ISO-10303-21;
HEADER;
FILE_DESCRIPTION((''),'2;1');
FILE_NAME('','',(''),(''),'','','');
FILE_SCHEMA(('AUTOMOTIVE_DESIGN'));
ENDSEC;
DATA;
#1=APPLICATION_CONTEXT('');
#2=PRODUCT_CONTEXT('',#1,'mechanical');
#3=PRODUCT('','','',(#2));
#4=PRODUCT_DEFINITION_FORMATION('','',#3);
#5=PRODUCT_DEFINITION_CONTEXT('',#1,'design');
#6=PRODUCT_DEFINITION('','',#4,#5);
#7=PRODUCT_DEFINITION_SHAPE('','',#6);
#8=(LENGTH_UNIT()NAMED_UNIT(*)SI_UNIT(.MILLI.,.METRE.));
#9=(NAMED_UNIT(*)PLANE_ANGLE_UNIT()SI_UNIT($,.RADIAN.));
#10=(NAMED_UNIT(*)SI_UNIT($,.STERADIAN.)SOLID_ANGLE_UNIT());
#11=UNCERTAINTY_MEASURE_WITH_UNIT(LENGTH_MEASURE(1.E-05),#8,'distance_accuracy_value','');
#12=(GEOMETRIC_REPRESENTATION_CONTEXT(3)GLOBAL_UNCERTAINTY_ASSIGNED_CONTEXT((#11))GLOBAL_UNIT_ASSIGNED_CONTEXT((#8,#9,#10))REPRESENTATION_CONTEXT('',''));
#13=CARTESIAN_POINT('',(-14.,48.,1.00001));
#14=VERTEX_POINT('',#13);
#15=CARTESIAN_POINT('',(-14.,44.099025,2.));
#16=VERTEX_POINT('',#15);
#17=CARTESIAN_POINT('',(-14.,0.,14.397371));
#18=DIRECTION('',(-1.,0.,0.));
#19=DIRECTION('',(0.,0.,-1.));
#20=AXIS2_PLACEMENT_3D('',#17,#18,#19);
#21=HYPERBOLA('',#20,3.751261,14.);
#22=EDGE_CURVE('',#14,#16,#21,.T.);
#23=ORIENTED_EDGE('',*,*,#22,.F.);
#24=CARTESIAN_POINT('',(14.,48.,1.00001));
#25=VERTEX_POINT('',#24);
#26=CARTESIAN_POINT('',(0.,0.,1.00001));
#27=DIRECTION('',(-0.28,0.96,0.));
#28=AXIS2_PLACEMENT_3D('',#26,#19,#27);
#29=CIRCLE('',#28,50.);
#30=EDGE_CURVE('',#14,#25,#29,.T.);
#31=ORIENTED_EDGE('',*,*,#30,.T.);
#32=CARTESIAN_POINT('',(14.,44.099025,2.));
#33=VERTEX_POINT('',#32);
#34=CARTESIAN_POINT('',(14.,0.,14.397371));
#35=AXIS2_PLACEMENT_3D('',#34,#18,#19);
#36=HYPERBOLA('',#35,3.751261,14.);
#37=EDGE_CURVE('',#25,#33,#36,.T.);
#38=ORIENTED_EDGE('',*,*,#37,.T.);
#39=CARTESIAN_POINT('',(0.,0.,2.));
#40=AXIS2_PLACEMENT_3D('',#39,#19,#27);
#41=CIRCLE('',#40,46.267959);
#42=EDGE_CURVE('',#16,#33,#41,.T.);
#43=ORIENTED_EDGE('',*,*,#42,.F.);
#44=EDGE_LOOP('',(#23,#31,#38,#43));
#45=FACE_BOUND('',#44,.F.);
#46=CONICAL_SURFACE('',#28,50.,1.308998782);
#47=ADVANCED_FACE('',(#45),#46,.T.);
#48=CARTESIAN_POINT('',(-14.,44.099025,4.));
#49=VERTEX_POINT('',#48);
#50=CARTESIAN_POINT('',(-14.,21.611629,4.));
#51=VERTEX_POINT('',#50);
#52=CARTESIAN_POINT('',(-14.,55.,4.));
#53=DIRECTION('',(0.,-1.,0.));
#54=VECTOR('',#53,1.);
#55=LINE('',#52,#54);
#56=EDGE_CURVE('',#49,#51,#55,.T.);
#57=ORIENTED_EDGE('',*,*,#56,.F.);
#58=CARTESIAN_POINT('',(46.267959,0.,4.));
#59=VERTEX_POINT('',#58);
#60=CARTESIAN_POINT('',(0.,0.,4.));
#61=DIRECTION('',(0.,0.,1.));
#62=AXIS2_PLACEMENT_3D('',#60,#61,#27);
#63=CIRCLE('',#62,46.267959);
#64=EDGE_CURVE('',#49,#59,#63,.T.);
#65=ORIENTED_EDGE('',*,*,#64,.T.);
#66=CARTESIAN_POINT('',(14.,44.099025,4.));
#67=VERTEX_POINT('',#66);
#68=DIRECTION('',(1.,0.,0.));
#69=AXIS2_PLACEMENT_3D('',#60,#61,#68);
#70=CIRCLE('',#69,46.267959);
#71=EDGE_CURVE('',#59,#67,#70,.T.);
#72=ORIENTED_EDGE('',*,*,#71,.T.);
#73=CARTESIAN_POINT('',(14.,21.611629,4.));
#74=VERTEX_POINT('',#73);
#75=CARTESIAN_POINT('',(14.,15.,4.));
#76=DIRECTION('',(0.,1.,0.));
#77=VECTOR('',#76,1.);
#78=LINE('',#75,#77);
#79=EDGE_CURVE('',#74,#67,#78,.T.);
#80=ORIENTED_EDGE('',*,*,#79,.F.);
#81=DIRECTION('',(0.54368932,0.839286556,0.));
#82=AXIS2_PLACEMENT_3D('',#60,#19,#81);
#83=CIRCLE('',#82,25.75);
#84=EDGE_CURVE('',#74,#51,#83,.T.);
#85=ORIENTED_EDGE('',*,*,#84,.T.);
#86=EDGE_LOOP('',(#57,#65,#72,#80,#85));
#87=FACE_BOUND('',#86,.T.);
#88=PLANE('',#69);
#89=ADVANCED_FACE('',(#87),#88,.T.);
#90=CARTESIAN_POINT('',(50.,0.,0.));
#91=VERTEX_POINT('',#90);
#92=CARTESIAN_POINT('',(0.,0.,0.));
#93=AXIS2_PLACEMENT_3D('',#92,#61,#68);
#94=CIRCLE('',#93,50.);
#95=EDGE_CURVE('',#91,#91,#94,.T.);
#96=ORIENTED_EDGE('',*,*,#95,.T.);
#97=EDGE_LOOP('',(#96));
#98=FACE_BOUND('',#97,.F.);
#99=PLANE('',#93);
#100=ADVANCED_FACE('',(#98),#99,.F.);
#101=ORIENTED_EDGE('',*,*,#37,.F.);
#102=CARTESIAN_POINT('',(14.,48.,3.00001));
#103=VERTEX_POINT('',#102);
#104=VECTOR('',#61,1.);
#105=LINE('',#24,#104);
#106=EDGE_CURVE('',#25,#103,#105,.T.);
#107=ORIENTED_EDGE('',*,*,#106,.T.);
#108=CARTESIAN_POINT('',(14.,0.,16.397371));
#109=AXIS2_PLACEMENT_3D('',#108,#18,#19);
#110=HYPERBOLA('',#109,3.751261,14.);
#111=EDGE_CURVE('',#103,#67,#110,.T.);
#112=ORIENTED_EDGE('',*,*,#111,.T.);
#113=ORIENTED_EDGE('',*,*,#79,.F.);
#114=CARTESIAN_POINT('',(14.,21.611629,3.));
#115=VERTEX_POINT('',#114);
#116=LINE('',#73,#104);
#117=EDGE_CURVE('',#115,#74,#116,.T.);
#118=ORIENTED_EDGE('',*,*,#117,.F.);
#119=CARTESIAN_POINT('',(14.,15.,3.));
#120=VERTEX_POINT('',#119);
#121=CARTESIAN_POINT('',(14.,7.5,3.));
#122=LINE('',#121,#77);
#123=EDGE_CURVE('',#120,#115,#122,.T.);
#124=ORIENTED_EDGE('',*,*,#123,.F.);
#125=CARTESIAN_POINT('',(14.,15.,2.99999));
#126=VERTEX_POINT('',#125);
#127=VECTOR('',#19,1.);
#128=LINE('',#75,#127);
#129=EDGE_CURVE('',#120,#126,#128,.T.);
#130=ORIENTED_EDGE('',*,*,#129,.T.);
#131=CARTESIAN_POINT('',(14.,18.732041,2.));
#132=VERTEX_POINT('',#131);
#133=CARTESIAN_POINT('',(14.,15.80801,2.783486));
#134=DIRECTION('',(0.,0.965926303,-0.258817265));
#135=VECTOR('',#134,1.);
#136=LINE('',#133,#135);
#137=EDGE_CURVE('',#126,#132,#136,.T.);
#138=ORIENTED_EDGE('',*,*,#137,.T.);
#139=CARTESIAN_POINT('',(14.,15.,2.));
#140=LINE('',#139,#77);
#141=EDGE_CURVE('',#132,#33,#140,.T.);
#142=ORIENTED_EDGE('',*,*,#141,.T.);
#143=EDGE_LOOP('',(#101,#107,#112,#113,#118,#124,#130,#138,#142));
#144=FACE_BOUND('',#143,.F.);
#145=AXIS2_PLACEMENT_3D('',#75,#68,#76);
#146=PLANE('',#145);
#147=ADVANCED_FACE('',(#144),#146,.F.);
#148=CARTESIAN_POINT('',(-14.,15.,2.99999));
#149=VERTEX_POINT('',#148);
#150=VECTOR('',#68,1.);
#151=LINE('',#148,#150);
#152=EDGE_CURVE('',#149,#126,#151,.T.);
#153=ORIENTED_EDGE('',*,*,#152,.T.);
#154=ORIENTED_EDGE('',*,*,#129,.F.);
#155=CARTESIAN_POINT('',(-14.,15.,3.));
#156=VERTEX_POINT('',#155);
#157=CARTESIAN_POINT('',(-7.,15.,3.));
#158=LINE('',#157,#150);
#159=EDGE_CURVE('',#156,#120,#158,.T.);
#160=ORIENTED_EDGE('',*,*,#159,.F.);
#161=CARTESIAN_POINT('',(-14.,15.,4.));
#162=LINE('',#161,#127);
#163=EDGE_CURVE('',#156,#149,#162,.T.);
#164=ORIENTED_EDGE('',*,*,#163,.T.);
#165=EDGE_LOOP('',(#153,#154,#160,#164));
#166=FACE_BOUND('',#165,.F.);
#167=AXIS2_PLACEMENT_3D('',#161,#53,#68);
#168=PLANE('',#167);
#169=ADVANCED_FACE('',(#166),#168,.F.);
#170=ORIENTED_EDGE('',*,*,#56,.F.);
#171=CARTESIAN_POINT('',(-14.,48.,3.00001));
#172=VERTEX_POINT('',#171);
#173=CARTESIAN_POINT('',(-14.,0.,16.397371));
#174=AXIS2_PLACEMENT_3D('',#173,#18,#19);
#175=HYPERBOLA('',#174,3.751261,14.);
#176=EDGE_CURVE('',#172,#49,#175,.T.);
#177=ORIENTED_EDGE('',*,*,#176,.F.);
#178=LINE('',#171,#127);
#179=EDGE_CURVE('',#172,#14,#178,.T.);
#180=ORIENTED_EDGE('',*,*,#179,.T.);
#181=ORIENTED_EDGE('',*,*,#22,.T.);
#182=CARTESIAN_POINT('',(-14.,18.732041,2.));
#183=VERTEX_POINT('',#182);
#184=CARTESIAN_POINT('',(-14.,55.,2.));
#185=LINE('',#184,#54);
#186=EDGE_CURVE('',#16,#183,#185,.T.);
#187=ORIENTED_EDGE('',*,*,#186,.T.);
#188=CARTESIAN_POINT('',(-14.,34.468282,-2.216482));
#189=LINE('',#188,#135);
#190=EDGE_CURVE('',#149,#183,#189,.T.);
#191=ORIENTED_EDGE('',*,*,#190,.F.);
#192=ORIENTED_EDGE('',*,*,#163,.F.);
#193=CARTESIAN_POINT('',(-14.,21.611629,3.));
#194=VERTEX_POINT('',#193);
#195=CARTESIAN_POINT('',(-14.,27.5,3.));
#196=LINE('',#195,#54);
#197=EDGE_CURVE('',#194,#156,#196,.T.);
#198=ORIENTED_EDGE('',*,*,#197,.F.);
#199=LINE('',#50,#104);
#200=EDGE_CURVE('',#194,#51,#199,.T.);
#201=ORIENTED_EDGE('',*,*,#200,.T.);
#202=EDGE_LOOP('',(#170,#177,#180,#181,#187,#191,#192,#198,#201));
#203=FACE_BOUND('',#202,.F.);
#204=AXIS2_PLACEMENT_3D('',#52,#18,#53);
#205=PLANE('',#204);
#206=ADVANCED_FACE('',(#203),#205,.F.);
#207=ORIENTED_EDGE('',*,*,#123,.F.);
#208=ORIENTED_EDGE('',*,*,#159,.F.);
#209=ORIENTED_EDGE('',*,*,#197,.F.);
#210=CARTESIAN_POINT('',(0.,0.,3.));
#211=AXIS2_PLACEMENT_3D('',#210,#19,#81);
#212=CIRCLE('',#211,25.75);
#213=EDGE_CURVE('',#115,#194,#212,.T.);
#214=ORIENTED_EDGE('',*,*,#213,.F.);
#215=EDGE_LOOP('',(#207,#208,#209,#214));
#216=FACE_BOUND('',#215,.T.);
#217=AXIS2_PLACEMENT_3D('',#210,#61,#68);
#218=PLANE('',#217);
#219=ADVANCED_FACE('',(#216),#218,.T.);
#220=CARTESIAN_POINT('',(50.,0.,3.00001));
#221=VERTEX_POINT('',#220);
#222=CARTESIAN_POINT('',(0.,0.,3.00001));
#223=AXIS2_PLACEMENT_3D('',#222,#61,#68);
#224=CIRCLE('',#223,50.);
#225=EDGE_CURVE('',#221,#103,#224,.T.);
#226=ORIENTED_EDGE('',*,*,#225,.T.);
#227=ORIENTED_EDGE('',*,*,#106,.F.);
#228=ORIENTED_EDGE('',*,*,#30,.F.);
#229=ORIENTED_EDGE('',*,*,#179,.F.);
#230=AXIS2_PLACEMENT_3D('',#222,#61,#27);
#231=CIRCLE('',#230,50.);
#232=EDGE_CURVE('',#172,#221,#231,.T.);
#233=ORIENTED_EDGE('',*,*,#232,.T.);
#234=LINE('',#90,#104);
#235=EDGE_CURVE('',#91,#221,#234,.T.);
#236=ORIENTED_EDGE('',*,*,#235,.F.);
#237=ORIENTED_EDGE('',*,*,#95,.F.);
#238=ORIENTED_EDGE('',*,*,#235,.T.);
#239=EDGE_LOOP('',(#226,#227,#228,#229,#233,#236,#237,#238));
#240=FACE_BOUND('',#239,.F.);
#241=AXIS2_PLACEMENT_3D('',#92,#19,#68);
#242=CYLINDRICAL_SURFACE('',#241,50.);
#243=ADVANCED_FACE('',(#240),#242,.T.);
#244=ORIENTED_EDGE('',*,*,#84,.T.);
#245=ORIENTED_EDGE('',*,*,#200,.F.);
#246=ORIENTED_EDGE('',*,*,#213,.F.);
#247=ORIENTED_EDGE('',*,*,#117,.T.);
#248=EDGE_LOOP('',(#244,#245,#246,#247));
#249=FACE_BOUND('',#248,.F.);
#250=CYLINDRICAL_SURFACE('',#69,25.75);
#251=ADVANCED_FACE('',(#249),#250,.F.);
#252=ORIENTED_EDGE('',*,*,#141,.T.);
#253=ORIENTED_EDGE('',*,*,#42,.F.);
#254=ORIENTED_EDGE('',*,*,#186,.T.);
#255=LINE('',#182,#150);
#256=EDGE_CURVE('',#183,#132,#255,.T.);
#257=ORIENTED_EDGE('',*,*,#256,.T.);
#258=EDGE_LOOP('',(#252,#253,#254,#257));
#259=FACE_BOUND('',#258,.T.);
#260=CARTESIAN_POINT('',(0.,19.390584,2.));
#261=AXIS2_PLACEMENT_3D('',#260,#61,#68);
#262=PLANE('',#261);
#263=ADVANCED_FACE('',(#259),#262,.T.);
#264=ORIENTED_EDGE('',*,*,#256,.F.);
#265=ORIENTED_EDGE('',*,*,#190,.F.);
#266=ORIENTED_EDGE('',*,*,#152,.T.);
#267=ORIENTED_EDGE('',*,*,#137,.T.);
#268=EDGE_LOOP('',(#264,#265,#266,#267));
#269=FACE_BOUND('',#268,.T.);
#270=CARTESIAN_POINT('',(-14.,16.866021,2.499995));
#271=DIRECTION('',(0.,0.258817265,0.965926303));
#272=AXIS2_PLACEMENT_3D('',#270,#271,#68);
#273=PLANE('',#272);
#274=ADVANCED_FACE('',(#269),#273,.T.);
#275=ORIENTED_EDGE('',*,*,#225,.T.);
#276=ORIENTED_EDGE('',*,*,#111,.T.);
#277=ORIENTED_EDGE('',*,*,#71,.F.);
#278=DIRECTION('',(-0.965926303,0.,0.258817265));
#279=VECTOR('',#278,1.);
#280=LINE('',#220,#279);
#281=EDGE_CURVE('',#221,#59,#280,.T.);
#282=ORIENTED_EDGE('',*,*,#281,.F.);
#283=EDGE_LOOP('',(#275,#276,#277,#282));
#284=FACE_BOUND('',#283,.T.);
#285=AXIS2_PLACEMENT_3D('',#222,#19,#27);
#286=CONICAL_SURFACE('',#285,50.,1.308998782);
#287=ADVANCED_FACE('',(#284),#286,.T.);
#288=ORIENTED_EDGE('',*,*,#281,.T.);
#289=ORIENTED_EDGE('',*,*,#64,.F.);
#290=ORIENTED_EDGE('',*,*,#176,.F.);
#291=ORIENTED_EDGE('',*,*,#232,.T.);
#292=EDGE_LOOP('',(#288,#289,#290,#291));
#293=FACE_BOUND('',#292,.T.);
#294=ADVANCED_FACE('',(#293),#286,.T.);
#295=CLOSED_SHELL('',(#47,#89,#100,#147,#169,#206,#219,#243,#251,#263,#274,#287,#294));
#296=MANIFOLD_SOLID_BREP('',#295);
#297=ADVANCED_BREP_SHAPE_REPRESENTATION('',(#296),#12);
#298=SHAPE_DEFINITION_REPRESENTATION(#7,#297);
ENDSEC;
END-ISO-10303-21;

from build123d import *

# Parameters (mm, degrees)
F0_R     = 50
F1_DEPTH = 4
F2_R     = 25.75
F3_DEPTH = 1
F5_DEPTH = 2
F6_SIZE2 = 3.732041
F6_SIZE  = 0.99999


# Not quite as in the source:
# - a fillet or chamfer is up to 0.001 mm smaller than in the source, because OpenCascade refuses the exact size
# - a feature names something its author has since deleted; it is built from what else it names


with BuildPart() as f1:
    # F0 (on Top) → F1 (new body)
    with BuildSketch(Plane.XY):
        Circle(F0_R)
    extrude(amount=F1_DEPTH)

    # F2 (on face) → F3 (cut)
    with BuildSketch(Plane.XY.offset(4)):
        Circle(F2_R)
    extrude(amount=-F3_DEPTH, mode=Mode.SUBTRACT)

    # F4 (on face) → F5 (cut)
    with BuildSketch(Plane.XY.offset(4)):
        with BuildLine():
            Line((-14, 21.6116288141), (-14, 15))
            Line((-14, 15), (14, 15))
            Line((14, 15), (14, 21.6116288141))
            ThreePointArc((14, 21.6116288141), (0, 25.75), (-14, 21.6116288141))
        make_face()
        with BuildLine():
            Line((-14, 48), (-14, 21.6116288141))
            ThreePointArc((-14, 21.6116288141), (0, 25.75), (14, 21.6116288141))
            Line((14, 21.6116288141), (14, 48))
            ThreePointArc((14, 48), (0, 50), (-14, 48))
        make_face()
        with BuildLine():
            Line((-14, 55), (-14, 48))
            ThreePointArc((-14, 48), (0, 50), (14, 48))
            Line((14, 48), (14, 55))
            Line((14, 55), (-14, 55))
        make_face()
    extrude(amount=-F5_DEPTH, mode=Mode.SUBTRACT)

    # F6 (size 1 and 3.7320508076 in the source; OpenCascade refuses exactly that, so slightly less here)
    f6_edges = [f1.edges().sort_by_distance(p)[0] for p in [
        (0, 15, 2),
        (-30, -40, 4),
        (0, 50, 2),
        (40, 30, 4),
    ]]
    chamfer(f6_edges, length=F6_SIZE, length2=F6_SIZE2)


solid = f1.part
